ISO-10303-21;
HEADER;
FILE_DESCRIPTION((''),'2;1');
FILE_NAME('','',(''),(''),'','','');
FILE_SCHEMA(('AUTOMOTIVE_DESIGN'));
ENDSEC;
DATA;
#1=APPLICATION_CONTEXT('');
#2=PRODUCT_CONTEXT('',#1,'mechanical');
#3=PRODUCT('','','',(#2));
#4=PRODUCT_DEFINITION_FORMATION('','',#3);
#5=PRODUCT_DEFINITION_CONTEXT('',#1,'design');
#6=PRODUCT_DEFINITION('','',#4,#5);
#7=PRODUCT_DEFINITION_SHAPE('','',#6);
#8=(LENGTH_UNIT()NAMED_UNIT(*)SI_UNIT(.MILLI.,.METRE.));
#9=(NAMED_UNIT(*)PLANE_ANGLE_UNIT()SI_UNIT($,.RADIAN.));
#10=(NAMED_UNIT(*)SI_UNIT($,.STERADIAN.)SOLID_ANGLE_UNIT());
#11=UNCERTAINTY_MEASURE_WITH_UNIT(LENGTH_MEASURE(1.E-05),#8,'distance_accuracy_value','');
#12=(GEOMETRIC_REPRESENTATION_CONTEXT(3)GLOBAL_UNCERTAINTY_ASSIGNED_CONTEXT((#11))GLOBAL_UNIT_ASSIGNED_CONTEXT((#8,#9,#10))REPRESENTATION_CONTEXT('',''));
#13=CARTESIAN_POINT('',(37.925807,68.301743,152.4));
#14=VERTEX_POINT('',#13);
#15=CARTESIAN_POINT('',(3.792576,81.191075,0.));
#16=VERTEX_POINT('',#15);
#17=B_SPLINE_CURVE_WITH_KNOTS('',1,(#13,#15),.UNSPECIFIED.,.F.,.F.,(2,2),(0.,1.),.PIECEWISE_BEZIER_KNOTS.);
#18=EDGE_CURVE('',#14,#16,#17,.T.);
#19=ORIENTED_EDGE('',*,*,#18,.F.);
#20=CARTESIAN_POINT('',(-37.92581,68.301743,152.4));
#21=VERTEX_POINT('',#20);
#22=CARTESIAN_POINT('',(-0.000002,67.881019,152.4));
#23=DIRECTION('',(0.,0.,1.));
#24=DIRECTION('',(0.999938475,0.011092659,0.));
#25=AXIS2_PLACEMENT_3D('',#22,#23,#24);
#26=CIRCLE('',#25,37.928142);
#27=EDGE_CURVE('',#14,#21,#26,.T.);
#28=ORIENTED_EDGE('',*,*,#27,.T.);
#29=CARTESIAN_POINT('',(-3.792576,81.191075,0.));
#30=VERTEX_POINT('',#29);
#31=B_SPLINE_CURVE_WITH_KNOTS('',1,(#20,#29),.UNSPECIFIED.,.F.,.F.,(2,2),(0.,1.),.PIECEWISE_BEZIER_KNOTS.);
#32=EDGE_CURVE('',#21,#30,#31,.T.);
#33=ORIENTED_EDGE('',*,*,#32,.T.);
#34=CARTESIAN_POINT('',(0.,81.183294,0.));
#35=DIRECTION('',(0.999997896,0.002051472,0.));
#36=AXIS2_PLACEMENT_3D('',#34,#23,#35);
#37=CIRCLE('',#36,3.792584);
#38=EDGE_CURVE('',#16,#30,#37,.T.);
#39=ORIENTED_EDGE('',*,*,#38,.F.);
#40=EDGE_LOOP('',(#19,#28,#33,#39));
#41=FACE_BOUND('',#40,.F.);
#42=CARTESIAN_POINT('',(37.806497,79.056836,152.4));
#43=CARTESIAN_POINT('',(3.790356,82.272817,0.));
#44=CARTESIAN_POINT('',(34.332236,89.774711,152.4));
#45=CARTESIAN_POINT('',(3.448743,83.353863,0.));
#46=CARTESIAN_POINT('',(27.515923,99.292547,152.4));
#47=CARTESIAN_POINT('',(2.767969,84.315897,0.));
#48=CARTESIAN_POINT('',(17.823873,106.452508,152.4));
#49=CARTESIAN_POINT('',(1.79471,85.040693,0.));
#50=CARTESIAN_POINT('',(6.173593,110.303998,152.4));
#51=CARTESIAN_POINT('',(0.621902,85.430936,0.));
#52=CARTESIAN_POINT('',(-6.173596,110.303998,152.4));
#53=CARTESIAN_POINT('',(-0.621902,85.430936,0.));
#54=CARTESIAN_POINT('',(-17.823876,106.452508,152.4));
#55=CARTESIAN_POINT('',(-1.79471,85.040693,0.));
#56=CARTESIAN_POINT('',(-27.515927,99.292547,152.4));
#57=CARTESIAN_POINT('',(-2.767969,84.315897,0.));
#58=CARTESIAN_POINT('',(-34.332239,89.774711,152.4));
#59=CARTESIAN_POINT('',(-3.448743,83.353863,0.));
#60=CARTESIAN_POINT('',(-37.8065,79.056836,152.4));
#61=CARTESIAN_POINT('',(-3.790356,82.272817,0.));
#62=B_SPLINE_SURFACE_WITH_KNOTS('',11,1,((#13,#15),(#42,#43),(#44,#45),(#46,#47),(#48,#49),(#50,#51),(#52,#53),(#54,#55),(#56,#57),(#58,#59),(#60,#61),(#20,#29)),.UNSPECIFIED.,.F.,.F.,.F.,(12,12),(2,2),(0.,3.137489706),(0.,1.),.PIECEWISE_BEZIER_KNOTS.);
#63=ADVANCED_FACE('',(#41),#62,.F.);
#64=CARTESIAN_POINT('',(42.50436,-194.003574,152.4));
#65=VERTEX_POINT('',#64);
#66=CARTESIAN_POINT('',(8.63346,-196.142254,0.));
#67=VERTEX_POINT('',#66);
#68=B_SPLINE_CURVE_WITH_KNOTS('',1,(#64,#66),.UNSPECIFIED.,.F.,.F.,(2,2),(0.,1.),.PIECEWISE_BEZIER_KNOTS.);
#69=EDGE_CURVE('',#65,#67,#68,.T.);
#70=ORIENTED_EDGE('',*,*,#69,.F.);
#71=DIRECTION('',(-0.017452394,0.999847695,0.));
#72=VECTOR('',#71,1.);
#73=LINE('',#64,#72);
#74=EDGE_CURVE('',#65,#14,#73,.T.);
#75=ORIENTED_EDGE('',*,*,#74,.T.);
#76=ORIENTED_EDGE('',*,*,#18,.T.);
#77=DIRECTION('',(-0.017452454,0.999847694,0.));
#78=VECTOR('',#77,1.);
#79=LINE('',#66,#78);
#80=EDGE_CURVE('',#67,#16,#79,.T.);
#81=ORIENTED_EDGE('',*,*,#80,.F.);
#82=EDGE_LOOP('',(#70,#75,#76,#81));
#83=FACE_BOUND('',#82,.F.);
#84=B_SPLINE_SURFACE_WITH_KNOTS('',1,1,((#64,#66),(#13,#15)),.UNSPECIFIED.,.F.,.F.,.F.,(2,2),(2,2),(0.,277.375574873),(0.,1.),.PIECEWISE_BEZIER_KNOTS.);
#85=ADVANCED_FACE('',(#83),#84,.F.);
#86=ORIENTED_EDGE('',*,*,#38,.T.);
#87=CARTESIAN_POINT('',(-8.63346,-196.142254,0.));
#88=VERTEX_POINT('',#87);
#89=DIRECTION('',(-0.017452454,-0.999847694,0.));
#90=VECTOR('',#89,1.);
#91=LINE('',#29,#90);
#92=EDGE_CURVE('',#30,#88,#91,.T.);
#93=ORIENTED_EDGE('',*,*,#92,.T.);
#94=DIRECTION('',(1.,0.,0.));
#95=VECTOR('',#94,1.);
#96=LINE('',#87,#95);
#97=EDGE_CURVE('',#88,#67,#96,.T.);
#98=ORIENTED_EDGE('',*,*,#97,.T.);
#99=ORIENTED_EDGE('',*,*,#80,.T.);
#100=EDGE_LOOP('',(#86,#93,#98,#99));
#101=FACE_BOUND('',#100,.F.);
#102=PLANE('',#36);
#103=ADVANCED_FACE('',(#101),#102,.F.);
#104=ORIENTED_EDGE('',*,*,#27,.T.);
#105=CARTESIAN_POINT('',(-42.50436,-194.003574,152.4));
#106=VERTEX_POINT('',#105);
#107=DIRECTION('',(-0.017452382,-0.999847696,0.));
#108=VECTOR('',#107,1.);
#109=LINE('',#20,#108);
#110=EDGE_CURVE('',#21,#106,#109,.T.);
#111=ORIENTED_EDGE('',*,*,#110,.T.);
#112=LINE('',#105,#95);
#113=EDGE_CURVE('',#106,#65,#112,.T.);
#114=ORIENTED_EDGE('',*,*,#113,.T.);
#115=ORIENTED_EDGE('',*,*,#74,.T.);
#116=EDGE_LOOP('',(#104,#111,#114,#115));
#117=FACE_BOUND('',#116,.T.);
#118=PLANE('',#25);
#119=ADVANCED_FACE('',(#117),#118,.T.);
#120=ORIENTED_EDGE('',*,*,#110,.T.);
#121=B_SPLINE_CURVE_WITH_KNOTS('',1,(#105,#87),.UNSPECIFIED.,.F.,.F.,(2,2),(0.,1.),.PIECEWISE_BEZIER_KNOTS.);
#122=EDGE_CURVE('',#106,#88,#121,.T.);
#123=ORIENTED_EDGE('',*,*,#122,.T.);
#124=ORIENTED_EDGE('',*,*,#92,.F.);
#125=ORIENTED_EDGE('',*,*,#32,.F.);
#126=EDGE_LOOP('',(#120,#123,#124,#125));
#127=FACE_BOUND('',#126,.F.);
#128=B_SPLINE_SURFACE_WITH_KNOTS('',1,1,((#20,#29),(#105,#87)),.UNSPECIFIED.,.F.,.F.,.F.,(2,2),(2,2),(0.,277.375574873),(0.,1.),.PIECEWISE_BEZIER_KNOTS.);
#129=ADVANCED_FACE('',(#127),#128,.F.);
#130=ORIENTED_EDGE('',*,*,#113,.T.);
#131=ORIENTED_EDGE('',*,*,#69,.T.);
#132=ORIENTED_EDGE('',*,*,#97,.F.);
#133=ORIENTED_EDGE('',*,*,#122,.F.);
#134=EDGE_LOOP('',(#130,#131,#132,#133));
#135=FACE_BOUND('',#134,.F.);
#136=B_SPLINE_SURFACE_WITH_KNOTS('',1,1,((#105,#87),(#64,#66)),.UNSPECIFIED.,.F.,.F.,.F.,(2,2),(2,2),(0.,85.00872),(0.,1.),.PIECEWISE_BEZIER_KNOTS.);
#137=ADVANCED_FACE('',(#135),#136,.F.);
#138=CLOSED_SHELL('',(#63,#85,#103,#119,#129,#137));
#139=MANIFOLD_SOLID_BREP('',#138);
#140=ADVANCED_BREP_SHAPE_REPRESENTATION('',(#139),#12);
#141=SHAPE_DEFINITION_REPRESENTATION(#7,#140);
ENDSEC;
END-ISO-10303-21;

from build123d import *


# Not quite as in the source:
# - ends of sketch curves that miss each other by under 0.0002 mm in the source are joined


with BuildPart() as f3:
    # F1 (on offset) → F3 section 0
    with BuildSketch(Plane.XY.offset(152.4)):
        with BuildLine():
            Line((-42.50436, -194.0035744), (42.50436, -194.0035744))
            Line((42.50436, -194.0035744), (37.9258068, 68.301743))
            ThreePointArc((37.9258068, 68.301743), (0, 105.809161), (-37.9258100359, 68.3017430359))
            Line((-37.9258100359, 68.3017430359), (-42.50436, -194.0035744))
        make_face()
    # F2 (on Top) → F3 section 1
    with BuildSketch(Plane.XY):
        with BuildLine():
            Line((-3.7925756, 81.1910746), (-8.63346, -196.1422544))
            Line((-8.63346, -196.1422544), (8.63346, -196.1422544))
            Line((8.63346, -196.1422544), (3.7925756, 81.1910746))
            ThreePointArc((3.7925756, 81.1910746), (0, 84.9758778), (-3.7925756, 81.1910746))
        make_face()
    loft()


solid = f3.part
